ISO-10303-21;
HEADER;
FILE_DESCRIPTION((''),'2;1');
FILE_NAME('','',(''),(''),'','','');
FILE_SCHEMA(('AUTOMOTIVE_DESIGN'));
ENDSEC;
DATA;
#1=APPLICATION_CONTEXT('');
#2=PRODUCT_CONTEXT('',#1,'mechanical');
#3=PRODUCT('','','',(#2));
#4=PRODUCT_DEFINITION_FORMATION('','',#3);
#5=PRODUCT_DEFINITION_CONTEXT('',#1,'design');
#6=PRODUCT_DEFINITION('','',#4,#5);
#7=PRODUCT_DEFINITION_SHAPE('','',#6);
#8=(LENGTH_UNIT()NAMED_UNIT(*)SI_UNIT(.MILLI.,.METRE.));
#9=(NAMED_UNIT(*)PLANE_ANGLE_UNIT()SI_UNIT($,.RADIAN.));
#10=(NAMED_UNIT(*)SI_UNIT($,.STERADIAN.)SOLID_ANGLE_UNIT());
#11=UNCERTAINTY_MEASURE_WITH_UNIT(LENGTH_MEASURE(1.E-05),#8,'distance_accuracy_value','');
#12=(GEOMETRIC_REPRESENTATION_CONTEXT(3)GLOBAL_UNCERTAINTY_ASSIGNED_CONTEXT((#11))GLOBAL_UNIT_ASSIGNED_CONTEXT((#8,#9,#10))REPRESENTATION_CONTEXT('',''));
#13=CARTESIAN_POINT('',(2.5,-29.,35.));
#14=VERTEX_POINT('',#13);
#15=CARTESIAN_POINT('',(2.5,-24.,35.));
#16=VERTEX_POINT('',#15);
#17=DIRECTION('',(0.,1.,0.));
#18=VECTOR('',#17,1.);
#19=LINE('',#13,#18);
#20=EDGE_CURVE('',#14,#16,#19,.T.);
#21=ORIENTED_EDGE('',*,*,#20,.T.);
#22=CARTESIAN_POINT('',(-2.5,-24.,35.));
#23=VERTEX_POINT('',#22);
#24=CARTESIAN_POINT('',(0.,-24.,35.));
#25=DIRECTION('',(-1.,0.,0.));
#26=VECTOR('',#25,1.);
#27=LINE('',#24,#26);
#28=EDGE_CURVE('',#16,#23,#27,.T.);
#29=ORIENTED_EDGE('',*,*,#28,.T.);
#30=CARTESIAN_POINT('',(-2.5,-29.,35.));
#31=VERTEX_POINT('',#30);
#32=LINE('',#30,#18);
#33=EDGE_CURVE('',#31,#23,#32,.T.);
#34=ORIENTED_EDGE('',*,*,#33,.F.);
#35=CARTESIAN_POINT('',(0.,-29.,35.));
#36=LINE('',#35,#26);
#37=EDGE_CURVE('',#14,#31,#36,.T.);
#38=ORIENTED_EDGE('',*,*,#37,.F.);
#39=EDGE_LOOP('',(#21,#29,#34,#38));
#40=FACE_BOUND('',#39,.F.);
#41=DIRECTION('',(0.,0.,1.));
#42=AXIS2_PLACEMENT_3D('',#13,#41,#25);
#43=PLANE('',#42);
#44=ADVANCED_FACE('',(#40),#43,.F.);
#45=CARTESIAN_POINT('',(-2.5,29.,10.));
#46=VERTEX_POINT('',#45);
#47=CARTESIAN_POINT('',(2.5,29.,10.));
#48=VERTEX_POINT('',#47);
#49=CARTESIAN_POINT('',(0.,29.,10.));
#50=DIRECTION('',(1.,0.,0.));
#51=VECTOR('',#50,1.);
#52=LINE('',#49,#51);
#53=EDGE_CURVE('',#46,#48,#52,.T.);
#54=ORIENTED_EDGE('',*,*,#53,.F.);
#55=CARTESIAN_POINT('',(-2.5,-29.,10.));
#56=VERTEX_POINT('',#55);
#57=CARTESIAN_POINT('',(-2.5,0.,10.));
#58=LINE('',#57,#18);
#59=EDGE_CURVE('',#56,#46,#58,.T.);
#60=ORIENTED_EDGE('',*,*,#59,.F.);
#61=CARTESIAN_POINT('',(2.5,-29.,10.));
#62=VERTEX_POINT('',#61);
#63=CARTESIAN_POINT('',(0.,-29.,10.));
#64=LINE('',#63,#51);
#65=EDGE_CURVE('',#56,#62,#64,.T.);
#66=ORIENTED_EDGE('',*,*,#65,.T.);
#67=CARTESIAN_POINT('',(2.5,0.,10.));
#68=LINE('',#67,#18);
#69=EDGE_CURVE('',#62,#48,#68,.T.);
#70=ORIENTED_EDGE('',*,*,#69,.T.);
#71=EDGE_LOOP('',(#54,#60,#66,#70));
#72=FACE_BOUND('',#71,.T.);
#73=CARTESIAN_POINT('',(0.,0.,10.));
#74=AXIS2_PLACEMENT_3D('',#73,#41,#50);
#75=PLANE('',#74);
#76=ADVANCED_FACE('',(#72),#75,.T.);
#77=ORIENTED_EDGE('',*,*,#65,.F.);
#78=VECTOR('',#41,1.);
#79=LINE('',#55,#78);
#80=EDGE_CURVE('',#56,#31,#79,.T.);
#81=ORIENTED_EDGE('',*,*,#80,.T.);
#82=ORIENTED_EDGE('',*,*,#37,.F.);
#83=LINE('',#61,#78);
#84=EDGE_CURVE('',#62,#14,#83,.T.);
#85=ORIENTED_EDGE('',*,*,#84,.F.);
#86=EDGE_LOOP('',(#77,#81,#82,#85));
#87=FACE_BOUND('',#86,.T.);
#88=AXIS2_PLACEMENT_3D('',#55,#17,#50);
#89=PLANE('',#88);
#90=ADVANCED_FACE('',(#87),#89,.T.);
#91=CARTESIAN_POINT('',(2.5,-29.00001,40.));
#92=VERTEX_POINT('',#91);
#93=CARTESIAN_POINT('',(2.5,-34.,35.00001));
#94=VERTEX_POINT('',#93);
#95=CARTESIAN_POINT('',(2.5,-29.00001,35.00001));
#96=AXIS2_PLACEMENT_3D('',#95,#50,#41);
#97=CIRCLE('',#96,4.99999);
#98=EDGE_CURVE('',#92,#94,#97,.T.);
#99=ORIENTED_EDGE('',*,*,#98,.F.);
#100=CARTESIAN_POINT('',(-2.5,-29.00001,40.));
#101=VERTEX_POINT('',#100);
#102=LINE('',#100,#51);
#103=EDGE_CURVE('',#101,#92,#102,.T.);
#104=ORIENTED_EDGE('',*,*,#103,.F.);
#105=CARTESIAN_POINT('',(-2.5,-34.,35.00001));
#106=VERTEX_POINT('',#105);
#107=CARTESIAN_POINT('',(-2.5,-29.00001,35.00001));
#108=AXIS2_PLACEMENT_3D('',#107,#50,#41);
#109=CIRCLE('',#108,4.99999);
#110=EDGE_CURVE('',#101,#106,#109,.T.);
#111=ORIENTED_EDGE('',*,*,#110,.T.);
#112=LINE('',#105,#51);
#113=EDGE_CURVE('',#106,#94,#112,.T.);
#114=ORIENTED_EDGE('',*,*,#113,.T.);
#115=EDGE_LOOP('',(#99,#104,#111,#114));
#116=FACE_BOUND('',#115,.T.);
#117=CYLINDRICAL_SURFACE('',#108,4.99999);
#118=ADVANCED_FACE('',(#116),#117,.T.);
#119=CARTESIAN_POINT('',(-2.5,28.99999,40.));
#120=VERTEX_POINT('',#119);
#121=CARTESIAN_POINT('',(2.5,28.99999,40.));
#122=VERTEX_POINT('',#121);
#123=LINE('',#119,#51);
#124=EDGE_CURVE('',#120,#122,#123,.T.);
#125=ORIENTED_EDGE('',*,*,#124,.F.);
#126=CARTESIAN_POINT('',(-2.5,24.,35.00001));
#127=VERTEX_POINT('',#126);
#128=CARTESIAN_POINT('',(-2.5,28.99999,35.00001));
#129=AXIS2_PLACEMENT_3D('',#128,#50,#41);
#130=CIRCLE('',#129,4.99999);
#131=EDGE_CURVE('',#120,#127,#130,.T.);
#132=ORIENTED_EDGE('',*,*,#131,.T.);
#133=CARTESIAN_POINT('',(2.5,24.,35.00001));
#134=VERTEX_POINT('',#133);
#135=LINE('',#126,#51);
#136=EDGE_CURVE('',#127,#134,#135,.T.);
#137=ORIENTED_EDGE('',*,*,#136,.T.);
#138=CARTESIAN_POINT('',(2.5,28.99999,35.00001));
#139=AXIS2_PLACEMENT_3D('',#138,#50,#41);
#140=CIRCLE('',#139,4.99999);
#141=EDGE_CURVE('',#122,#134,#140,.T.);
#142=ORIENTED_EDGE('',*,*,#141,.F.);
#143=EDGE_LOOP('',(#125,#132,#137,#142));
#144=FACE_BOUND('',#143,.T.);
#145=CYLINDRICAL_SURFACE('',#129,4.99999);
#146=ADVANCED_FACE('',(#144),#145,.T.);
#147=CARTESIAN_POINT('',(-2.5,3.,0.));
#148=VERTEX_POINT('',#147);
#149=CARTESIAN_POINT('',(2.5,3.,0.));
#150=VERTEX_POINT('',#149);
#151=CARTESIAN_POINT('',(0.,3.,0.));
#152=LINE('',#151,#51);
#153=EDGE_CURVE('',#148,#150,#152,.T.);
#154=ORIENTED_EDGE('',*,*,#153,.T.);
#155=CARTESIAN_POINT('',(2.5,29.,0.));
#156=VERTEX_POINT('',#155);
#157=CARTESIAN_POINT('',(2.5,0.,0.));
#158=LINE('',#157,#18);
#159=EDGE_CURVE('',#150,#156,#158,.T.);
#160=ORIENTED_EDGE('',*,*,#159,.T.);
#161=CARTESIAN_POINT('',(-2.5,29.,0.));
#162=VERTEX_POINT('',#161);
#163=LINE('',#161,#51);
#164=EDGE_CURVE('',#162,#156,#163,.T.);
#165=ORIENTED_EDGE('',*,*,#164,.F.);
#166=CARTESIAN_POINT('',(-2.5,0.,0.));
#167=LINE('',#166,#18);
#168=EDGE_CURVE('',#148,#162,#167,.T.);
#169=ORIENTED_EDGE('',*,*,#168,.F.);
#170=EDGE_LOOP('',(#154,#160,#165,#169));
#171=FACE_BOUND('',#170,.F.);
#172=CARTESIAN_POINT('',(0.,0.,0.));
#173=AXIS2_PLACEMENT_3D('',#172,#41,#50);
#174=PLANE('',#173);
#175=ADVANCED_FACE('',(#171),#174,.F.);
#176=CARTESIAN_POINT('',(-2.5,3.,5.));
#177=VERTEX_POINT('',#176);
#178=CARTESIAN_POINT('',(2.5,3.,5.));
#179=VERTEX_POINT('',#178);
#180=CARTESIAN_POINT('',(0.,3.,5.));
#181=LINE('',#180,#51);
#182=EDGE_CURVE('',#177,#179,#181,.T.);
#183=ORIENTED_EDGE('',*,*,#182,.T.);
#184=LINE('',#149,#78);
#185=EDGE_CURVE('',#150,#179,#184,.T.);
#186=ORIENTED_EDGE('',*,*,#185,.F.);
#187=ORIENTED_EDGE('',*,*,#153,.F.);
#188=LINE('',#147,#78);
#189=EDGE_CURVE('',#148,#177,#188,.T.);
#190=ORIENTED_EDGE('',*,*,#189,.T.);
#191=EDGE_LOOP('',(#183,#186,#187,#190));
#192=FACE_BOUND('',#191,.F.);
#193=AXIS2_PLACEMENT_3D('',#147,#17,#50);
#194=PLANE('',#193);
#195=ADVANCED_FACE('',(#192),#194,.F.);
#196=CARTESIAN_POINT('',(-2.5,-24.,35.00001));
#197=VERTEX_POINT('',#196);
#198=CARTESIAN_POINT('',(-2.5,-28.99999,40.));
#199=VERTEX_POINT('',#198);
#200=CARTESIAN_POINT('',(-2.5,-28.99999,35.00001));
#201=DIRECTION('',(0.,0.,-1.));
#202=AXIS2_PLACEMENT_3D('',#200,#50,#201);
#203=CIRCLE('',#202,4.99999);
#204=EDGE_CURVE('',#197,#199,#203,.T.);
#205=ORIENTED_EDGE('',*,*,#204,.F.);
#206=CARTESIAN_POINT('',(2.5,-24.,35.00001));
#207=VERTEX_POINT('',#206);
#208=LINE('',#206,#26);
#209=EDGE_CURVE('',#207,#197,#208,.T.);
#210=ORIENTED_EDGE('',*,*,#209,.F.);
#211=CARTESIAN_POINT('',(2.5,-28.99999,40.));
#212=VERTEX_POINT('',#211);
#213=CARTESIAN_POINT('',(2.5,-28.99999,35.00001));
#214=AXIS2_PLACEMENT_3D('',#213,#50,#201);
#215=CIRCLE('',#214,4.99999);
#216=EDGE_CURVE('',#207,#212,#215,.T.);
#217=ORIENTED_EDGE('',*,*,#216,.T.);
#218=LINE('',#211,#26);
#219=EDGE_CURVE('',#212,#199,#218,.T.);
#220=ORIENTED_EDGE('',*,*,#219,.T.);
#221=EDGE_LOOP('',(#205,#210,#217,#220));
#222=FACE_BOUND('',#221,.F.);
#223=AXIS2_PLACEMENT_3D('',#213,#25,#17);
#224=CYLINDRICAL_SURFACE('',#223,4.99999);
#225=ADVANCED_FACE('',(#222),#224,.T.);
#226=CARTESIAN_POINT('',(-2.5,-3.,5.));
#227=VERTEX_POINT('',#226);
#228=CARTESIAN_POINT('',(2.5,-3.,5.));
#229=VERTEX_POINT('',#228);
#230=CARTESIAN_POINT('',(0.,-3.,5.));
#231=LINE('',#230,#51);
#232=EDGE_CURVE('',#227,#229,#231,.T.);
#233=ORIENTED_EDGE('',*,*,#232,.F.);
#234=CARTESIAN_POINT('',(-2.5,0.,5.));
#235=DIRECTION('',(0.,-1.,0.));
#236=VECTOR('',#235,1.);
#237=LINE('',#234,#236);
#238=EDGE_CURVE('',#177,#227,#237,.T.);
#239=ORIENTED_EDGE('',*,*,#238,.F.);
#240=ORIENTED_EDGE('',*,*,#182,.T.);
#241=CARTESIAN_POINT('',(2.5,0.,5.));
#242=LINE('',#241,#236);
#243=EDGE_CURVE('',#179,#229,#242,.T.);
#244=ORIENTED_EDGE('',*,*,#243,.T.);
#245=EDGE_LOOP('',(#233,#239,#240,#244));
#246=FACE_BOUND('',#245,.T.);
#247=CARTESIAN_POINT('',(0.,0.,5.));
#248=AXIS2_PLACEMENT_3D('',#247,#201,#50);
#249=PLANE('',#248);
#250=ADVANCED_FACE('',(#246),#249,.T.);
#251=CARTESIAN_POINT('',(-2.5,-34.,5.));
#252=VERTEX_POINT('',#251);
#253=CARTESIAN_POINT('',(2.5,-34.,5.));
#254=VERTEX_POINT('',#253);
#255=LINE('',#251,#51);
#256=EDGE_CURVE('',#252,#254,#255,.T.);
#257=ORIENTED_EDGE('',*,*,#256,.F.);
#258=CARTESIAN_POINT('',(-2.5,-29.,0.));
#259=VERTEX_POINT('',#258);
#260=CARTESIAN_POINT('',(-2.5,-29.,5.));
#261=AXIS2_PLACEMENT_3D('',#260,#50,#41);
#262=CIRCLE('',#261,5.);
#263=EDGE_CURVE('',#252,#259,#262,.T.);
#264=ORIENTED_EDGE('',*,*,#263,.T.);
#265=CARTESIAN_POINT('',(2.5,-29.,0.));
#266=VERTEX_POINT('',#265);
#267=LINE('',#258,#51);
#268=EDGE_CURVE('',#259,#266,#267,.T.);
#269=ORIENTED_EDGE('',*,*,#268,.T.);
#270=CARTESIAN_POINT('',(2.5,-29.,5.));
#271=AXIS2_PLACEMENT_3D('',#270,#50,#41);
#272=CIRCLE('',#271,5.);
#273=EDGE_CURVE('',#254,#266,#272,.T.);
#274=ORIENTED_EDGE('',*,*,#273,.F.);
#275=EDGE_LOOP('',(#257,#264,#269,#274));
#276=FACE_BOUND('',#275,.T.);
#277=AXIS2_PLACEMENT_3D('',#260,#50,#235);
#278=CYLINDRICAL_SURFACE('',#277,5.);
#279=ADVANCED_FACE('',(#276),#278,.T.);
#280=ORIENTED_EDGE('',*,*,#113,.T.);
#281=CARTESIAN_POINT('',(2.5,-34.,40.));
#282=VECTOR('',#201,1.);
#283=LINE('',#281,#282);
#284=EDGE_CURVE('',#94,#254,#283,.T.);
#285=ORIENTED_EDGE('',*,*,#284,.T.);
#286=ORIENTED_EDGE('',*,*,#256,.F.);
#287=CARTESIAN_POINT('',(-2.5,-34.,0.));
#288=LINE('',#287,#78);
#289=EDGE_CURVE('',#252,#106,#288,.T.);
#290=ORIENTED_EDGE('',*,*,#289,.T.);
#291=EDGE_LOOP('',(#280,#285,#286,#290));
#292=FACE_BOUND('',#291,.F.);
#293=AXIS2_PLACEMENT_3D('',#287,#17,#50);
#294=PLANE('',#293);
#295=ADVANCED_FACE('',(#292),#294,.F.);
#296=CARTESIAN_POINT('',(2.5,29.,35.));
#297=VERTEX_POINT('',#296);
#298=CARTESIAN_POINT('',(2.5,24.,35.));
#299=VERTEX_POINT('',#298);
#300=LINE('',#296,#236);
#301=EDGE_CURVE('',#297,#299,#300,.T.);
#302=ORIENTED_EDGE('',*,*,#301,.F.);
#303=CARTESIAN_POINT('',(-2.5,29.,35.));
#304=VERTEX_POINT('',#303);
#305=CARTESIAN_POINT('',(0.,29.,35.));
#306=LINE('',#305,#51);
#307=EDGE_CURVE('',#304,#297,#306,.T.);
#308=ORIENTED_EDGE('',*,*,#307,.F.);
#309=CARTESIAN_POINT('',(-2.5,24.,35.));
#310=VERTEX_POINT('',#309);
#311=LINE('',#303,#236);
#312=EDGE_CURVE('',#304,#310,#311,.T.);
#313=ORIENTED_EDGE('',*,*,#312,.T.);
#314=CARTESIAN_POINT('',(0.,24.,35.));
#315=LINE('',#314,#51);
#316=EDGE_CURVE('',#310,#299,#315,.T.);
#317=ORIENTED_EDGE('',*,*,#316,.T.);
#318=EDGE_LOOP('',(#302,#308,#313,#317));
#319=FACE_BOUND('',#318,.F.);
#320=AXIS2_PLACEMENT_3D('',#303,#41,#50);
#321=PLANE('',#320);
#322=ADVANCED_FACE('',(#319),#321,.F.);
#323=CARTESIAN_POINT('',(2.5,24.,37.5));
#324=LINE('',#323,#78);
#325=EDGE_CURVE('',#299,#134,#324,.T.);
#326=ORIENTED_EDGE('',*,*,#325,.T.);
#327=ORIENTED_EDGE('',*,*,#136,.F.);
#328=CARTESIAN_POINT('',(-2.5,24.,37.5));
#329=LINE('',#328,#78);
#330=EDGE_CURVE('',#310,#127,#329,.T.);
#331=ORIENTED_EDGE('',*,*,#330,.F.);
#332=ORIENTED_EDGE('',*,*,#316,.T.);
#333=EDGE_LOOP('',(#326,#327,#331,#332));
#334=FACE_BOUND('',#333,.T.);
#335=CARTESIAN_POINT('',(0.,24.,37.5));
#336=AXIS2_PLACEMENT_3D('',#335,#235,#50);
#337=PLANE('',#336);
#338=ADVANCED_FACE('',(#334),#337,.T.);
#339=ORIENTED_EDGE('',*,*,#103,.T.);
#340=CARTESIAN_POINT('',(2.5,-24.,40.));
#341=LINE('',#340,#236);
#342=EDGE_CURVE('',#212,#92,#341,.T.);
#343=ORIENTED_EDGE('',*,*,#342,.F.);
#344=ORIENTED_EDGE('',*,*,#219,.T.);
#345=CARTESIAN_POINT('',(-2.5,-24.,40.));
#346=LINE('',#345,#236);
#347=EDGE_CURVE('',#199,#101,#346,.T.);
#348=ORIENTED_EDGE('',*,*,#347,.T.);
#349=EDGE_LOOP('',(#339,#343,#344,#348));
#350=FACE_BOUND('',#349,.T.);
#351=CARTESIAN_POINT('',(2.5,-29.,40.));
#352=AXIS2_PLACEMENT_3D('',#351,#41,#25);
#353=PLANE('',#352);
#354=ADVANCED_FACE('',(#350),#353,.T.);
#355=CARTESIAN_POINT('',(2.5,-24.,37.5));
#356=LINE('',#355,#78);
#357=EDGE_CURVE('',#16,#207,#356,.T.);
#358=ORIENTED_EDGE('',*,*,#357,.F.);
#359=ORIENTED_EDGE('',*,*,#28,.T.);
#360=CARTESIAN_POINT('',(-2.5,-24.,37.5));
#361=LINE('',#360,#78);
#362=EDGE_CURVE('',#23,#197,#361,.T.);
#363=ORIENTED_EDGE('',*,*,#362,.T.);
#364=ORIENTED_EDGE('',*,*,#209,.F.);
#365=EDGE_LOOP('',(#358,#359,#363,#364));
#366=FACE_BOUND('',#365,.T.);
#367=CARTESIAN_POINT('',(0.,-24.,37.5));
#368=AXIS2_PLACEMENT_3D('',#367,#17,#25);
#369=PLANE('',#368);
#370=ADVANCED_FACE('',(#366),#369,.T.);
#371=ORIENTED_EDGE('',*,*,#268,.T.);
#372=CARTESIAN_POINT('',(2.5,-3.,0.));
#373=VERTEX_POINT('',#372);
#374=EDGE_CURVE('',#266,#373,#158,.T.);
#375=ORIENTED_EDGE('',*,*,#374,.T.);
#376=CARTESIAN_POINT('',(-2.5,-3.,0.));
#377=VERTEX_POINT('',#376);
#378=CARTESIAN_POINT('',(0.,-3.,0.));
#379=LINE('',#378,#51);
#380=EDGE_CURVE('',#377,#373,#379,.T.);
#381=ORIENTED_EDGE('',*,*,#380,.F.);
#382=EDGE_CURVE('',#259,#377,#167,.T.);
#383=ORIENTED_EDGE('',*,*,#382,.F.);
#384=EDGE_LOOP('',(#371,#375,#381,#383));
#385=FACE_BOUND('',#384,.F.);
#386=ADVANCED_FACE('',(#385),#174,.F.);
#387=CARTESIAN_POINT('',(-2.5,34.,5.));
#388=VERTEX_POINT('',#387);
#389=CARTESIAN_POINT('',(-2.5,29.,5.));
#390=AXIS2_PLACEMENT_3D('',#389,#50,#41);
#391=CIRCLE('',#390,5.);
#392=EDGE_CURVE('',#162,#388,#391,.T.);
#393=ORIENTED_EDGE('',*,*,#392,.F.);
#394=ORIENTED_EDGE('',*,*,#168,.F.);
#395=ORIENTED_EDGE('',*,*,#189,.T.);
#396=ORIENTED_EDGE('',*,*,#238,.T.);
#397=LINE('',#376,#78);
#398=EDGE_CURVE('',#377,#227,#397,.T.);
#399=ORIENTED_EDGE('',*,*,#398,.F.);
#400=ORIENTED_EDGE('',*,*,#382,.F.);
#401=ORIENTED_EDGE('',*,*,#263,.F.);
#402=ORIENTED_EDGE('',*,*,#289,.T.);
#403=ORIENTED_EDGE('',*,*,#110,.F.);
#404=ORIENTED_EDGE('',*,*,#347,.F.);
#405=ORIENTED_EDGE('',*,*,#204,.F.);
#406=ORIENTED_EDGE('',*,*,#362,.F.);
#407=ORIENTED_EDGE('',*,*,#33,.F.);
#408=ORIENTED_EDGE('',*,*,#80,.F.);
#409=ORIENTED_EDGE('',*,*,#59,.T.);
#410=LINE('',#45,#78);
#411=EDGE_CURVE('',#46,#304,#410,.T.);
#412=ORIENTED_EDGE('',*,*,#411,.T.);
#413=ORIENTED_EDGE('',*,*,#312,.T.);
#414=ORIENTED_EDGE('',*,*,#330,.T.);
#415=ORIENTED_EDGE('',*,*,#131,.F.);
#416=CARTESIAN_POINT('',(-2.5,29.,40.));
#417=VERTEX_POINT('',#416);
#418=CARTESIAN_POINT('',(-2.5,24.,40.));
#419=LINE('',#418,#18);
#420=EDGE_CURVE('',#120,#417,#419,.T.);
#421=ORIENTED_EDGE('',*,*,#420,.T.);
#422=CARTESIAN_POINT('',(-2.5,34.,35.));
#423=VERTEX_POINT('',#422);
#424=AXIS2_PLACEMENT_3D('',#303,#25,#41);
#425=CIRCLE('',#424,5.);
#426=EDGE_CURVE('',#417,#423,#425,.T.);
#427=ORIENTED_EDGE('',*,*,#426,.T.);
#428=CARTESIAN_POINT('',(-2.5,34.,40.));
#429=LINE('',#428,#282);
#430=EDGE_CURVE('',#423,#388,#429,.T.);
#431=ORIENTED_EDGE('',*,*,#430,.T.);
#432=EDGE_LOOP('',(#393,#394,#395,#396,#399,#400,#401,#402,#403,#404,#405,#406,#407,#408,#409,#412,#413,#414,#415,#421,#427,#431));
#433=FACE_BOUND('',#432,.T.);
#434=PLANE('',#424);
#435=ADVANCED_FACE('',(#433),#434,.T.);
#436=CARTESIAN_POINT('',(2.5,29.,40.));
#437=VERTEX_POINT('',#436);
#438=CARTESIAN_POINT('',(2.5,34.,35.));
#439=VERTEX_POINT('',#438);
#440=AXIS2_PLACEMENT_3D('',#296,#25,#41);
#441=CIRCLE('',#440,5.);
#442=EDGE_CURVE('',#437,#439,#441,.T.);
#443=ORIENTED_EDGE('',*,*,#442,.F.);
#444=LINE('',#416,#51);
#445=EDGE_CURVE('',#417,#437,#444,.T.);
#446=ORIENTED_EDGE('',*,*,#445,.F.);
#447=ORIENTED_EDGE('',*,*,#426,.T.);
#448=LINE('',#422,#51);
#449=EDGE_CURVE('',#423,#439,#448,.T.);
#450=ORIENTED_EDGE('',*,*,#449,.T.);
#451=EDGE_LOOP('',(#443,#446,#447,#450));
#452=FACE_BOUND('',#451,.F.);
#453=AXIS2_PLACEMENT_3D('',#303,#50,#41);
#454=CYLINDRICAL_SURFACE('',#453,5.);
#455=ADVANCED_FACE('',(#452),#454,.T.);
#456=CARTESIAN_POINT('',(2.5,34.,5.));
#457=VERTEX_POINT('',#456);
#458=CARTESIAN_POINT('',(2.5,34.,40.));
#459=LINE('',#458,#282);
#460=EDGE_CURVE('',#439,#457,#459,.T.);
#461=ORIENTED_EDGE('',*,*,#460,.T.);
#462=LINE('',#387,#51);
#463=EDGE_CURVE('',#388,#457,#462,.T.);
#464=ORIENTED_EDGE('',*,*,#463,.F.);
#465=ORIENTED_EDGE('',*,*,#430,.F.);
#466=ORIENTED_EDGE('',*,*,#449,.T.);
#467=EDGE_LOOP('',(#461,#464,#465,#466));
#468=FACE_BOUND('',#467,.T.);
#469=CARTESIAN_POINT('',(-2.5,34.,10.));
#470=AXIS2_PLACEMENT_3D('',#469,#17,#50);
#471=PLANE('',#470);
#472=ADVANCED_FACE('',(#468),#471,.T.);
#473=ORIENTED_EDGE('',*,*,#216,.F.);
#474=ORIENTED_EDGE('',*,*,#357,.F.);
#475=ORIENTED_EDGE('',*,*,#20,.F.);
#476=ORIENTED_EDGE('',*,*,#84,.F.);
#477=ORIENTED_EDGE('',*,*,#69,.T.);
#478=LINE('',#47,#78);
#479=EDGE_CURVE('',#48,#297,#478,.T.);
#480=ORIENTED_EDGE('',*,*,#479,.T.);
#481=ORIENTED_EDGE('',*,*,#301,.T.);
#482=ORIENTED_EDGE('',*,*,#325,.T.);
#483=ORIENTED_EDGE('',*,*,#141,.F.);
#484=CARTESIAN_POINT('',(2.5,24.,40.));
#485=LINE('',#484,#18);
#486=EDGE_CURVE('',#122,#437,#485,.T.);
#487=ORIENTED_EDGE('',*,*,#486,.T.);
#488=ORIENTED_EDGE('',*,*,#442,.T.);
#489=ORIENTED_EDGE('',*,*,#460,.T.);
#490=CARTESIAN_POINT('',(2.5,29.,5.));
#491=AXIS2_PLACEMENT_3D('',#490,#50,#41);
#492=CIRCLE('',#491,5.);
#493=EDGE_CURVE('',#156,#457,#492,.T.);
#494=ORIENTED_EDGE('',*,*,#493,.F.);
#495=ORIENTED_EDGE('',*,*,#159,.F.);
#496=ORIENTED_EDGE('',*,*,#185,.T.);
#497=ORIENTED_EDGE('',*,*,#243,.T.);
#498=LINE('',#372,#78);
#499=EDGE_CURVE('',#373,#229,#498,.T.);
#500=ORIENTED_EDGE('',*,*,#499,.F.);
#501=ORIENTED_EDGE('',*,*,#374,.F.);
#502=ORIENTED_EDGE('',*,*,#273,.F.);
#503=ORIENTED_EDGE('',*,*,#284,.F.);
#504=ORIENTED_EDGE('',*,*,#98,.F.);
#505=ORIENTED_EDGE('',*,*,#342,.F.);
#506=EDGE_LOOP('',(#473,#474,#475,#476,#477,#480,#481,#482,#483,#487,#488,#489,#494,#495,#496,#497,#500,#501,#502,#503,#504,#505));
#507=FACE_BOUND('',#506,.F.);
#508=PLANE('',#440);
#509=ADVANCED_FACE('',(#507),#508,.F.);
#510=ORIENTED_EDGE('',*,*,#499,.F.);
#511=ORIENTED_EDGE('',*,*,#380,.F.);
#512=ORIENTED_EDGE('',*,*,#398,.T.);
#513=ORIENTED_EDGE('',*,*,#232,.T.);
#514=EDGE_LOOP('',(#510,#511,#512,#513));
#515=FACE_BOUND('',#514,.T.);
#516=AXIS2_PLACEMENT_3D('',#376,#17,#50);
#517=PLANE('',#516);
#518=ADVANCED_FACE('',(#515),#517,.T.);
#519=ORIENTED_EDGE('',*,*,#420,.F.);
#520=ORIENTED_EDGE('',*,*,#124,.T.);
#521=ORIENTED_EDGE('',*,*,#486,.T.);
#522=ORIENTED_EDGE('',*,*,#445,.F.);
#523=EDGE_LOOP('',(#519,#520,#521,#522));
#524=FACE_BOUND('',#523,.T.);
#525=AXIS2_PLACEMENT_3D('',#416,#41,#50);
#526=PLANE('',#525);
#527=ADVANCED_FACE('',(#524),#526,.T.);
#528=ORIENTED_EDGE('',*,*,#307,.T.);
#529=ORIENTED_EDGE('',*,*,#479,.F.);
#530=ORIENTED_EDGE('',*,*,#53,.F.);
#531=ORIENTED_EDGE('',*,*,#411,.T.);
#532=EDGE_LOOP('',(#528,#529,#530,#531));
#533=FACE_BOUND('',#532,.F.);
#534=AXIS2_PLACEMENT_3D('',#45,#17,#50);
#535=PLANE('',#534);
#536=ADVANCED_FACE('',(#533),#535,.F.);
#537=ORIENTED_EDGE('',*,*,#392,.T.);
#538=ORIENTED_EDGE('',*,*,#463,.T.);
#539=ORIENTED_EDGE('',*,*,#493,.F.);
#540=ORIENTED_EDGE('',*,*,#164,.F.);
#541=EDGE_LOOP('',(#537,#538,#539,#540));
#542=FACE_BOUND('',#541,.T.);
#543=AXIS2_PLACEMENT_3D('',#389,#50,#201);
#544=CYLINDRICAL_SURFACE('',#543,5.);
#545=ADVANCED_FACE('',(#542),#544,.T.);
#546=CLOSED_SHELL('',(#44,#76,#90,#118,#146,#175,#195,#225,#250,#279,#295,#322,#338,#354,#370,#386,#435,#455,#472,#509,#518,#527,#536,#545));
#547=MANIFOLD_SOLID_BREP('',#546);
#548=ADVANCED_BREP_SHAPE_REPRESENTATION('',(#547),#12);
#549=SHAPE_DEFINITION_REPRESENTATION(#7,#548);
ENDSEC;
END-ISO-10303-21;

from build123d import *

# Parameters (mm, degrees)
F0_W     = 5
F0_H     = 68
F1_DEPTH = 10
F2_W     = 5
F2_H     = 5
F3_DEPTH = 30
F5_W     = 5
F5_H     = 5
F6_DEPTH = 5
F4_W     = 5
F4_H     = 5
F7_DEPTH = 5
F8_W     = 5
F8_H     = 6
F9_DEPTH = 5
F10_R    = 4.99999
F11_R    = 5


# Not quite as in the source:
# - a fillet or chamfer is up to 0.001 mm smaller than in the source, because OpenCascade refuses the exact size


with BuildPart() as f1:
    # F0 (on Top) → F1 (new body)
    with BuildSketch(Plane.XY):
        Rectangle(F0_W, F0_H)
    extrude(amount=F1_DEPTH)

    # F2 (on face) → F3 (join)
    with BuildSketch(Plane.XY.offset(10)):
        with Locations((0, 31.5)):
            Rectangle(F2_W, F2_H)
        with Locations((0, -31.5)):
            Rectangle(F2_W, F2_H)
    extrude(amount=F3_DEPTH)

    # F5 (on face) → F6 (join)
    with BuildSketch(Plane(origin=(0, -29, 0), x_dir=(-1, 0, 0), z_dir=(0, 1, 0))):
        with Locations((0, 37.5)):
            Rectangle(F5_W, F5_H)
    extrude(amount=F6_DEPTH)

    # F4 (on face) → F7 (join)
    with BuildSketch(Plane.XZ.offset(-29)):
        with Locations((0, 37.5)):
            Rectangle(F4_W, F4_H)
    extrude(amount=F7_DEPTH)

    # F8 (on face) → F9 (cut)
    with BuildSketch(Plane(origin=(0, 0, 0), x_dir=(1, 0, 0), z_dir=(0, 0, -1))):
        Rectangle(F8_W, F8_H)
    extrude(amount=-F9_DEPTH, mode=Mode.SUBTRACT)

    # F10 (radius 5 in the source; OpenCascade refuses exactly that, so slightly less here)
    f10_edges = [f1.edges().sort_by_distance(p)[0] for p in [
        (0, 24, 40),
        (0, -24, 40),
        (0, -34, 40),
    ]]
    fillet(f10_edges, radius=F10_R)

    # F11
    f11_edges = [f1.edges().sort_by_distance(p)[0] for p in [
        (0, 34, 40),
        (0, 34, 0),
        (0, -34, 0),
    ]]
    fillet(f11_edges, radius=F11_R)


solid = f1.part
